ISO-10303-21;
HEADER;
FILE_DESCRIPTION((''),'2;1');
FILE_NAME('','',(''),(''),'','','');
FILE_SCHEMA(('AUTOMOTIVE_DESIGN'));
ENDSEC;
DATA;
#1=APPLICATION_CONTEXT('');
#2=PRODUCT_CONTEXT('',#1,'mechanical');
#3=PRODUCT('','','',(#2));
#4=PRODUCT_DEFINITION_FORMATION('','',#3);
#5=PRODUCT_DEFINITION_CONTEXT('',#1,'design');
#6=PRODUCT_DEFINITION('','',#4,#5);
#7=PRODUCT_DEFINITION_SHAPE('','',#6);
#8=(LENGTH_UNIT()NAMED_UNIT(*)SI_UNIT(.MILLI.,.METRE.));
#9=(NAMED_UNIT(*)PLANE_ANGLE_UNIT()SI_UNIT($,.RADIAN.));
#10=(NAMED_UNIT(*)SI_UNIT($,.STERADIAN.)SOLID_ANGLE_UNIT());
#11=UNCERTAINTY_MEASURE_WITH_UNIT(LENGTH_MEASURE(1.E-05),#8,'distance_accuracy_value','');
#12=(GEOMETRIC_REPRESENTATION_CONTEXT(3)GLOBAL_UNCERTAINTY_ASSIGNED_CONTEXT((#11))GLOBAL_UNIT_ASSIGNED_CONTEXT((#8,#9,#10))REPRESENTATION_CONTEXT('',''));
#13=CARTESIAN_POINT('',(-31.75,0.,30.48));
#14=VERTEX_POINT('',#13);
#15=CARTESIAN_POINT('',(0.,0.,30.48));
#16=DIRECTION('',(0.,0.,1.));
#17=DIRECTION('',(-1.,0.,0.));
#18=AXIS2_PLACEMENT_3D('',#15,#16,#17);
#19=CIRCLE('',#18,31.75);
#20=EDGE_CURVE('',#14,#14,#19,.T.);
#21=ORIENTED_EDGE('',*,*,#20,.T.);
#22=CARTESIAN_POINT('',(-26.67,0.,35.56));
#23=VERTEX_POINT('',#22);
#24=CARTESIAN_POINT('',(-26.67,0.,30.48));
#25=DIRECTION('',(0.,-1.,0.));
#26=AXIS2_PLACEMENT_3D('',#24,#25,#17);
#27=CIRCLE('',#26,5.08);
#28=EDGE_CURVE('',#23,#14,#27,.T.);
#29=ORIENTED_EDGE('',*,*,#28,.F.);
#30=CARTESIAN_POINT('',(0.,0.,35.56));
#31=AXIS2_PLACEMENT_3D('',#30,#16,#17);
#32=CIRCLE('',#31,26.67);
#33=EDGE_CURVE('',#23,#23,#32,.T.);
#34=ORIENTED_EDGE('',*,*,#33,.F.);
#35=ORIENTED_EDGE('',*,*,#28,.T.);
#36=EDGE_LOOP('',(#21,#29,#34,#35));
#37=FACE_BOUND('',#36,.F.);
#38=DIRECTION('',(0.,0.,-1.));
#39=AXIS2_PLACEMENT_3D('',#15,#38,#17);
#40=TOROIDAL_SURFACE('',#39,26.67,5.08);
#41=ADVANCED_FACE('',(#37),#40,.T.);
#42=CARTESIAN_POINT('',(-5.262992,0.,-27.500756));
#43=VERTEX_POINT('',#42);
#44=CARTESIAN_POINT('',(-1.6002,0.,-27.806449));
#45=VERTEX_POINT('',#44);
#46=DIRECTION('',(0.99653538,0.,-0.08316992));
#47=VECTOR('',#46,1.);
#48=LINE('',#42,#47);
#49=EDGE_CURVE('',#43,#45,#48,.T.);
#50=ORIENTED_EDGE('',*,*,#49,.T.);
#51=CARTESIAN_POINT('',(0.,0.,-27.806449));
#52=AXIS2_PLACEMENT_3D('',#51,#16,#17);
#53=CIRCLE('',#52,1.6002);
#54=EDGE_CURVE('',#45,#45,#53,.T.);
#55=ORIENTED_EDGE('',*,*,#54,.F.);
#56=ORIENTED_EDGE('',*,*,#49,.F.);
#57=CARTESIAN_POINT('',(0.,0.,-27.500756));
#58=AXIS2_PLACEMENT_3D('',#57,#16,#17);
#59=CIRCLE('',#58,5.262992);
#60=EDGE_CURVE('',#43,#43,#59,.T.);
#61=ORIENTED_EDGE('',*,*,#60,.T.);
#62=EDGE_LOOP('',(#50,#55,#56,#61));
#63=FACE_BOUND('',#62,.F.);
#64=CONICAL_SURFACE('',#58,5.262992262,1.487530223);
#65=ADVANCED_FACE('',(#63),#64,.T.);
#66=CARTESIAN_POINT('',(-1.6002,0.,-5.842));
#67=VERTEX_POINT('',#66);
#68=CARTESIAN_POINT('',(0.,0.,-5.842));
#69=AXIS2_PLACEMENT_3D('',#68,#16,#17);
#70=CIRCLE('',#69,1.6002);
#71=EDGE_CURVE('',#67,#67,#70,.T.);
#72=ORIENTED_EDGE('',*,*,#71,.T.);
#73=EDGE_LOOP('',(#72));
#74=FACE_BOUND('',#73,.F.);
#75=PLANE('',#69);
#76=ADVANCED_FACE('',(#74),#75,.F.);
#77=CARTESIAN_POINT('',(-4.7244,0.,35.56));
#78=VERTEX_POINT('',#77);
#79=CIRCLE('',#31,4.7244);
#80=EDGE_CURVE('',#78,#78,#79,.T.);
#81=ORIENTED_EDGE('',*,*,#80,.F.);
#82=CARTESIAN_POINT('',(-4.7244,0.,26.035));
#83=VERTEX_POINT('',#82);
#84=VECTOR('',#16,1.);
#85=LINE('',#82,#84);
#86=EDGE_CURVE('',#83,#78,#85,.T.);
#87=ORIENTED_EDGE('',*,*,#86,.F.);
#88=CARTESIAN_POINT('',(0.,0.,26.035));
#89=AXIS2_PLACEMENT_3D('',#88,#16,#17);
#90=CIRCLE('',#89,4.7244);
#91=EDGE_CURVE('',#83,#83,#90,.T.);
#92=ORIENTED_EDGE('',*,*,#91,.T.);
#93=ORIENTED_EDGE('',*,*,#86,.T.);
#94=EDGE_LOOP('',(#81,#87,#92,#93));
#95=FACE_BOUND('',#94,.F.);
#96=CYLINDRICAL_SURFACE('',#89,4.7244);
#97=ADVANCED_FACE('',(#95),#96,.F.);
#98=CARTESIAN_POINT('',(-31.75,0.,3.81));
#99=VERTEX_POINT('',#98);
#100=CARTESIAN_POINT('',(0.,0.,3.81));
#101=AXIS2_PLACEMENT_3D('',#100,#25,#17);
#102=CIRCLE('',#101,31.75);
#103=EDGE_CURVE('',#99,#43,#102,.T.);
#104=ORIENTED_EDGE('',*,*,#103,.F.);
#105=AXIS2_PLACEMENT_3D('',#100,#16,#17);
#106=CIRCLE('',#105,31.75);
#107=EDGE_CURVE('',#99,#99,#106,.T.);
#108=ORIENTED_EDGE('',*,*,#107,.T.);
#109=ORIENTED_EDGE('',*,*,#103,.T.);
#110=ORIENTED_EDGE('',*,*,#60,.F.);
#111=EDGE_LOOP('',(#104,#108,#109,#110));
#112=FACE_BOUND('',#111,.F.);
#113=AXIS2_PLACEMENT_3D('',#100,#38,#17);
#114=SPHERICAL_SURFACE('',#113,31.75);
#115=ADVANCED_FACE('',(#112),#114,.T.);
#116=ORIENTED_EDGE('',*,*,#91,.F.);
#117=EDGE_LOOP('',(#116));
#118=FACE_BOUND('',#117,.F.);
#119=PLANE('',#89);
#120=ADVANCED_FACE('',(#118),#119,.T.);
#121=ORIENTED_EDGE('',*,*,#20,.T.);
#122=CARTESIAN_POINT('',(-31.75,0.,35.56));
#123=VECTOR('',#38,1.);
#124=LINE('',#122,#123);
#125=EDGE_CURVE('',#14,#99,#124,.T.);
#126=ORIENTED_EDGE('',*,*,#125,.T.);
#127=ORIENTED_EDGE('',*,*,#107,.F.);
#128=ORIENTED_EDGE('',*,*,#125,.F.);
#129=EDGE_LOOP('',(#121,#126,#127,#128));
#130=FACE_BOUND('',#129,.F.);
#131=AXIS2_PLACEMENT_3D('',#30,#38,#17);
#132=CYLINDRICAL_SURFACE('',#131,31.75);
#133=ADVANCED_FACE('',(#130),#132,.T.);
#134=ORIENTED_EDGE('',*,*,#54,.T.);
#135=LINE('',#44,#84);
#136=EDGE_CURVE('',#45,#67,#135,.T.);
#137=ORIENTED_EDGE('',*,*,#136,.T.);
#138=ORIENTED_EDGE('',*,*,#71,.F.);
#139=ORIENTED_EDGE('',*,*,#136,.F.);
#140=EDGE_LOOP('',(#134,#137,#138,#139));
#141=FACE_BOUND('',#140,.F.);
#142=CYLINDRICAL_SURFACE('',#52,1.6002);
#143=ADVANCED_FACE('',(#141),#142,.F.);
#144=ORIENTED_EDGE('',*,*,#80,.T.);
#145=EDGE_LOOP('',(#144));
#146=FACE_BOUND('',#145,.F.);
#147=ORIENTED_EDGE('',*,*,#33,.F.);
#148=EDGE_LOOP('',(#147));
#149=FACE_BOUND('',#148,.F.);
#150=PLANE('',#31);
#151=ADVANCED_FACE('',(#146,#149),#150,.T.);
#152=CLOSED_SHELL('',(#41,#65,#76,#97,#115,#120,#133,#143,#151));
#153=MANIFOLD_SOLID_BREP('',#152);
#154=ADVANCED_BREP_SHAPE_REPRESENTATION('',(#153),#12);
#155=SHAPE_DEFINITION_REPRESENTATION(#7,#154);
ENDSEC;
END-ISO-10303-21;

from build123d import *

# Parameters (mm, degrees)
F3_R = 5.08
F5_R = 5.08


# Not quite as in the source:
# - a feature names something its author has since deleted; it is built from what else it names


with BuildPart() as f1:
    # F0 (on Front) → F1 (revolve)
    with BuildSketch(Plane.XZ):
        with BuildLine():
            Line((0, -5.842), (0, 0))
            Line((0, 0), (0, 3.81))
            Line((0, 3.81), (0, 16.51))
            Line((0, 16.51), (0, 26.035))
            Line((0, 26.035), (-4.7244, 26.035))
            Line((-4.7244, 26.035), (-4.7244, 35.56))
            Line((-4.7244, 35.56), (-7.2644, 35.56))
            Line((-7.2644, 35.56), (-31.75, 35.56))
            Line((-31.75, 35.56), (-31.75, 3.81))
            ThreePointArc((-31.75, 3.81), (-24.2400753332, -16.6956394155), (-5.2629922621, -27.5007555394))
            Line((-5.2629922621, -27.5007555394), (-1.6002, -27.8064487898))
            Line((-1.6002, -27.8064487898), (-1.6002, -5.842))
            Line((-1.6002, -5.842), (0, -5.842))
        make_face()
    revolve(axis=Axis((0, 0, 3.81), (0, 0, 1)))

    # F5
    f5_edges = [f1.edges().sort_by_distance(p)[0] for p in [
        (31.75, 0, 35.56),
    ]]
    fillet(f5_edges, radius=F5_R)


with BuildPart() as f2:
    # F0 (on Front) → F2 (revolve)
    with BuildSketch(Plane.XZ):
        with BuildLine():
            Line((0, -5.842), (0, 0))
            Line((0, 0), (0, 3.81))
            Line((0, 3.81), (0, 16.51))
            Line((0, 16.51), (0, 26.035))
            Line((0, 26.035), (-4.7244, 26.035))
            Line((-4.7244, 26.035), (-4.7244, 35.56))
            Line((-4.7244, 35.56), (-7.2644, 35.56))
            Line((-7.2644, 35.56), (-31.75, 35.56))
            Line((-31.75, 35.56), (-31.75, 3.81))
            ThreePointArc((-31.75, 3.81), (-24.2400753332, -16.6956394155), (-5.2629922621, -27.5007555394))
            Line((-5.2629922621, -27.5007555394), (-1.6002, -27.8064487898))
            Line((-1.6002, -27.8064487898), (-1.6002, -5.842))
            Line((-1.6002, -5.842), (0, -5.842))
        make_face()
    revolve(axis=Axis((0, 0, 3.81), (0, 0, 1)))

    # F3
    f3_edges = [f2.edges().sort_by_distance(p)[0] for p in [
        (31.75, 0, 35.56),
    ]]
    fillet(f3_edges, radius=F3_R)


solid = f1.part
